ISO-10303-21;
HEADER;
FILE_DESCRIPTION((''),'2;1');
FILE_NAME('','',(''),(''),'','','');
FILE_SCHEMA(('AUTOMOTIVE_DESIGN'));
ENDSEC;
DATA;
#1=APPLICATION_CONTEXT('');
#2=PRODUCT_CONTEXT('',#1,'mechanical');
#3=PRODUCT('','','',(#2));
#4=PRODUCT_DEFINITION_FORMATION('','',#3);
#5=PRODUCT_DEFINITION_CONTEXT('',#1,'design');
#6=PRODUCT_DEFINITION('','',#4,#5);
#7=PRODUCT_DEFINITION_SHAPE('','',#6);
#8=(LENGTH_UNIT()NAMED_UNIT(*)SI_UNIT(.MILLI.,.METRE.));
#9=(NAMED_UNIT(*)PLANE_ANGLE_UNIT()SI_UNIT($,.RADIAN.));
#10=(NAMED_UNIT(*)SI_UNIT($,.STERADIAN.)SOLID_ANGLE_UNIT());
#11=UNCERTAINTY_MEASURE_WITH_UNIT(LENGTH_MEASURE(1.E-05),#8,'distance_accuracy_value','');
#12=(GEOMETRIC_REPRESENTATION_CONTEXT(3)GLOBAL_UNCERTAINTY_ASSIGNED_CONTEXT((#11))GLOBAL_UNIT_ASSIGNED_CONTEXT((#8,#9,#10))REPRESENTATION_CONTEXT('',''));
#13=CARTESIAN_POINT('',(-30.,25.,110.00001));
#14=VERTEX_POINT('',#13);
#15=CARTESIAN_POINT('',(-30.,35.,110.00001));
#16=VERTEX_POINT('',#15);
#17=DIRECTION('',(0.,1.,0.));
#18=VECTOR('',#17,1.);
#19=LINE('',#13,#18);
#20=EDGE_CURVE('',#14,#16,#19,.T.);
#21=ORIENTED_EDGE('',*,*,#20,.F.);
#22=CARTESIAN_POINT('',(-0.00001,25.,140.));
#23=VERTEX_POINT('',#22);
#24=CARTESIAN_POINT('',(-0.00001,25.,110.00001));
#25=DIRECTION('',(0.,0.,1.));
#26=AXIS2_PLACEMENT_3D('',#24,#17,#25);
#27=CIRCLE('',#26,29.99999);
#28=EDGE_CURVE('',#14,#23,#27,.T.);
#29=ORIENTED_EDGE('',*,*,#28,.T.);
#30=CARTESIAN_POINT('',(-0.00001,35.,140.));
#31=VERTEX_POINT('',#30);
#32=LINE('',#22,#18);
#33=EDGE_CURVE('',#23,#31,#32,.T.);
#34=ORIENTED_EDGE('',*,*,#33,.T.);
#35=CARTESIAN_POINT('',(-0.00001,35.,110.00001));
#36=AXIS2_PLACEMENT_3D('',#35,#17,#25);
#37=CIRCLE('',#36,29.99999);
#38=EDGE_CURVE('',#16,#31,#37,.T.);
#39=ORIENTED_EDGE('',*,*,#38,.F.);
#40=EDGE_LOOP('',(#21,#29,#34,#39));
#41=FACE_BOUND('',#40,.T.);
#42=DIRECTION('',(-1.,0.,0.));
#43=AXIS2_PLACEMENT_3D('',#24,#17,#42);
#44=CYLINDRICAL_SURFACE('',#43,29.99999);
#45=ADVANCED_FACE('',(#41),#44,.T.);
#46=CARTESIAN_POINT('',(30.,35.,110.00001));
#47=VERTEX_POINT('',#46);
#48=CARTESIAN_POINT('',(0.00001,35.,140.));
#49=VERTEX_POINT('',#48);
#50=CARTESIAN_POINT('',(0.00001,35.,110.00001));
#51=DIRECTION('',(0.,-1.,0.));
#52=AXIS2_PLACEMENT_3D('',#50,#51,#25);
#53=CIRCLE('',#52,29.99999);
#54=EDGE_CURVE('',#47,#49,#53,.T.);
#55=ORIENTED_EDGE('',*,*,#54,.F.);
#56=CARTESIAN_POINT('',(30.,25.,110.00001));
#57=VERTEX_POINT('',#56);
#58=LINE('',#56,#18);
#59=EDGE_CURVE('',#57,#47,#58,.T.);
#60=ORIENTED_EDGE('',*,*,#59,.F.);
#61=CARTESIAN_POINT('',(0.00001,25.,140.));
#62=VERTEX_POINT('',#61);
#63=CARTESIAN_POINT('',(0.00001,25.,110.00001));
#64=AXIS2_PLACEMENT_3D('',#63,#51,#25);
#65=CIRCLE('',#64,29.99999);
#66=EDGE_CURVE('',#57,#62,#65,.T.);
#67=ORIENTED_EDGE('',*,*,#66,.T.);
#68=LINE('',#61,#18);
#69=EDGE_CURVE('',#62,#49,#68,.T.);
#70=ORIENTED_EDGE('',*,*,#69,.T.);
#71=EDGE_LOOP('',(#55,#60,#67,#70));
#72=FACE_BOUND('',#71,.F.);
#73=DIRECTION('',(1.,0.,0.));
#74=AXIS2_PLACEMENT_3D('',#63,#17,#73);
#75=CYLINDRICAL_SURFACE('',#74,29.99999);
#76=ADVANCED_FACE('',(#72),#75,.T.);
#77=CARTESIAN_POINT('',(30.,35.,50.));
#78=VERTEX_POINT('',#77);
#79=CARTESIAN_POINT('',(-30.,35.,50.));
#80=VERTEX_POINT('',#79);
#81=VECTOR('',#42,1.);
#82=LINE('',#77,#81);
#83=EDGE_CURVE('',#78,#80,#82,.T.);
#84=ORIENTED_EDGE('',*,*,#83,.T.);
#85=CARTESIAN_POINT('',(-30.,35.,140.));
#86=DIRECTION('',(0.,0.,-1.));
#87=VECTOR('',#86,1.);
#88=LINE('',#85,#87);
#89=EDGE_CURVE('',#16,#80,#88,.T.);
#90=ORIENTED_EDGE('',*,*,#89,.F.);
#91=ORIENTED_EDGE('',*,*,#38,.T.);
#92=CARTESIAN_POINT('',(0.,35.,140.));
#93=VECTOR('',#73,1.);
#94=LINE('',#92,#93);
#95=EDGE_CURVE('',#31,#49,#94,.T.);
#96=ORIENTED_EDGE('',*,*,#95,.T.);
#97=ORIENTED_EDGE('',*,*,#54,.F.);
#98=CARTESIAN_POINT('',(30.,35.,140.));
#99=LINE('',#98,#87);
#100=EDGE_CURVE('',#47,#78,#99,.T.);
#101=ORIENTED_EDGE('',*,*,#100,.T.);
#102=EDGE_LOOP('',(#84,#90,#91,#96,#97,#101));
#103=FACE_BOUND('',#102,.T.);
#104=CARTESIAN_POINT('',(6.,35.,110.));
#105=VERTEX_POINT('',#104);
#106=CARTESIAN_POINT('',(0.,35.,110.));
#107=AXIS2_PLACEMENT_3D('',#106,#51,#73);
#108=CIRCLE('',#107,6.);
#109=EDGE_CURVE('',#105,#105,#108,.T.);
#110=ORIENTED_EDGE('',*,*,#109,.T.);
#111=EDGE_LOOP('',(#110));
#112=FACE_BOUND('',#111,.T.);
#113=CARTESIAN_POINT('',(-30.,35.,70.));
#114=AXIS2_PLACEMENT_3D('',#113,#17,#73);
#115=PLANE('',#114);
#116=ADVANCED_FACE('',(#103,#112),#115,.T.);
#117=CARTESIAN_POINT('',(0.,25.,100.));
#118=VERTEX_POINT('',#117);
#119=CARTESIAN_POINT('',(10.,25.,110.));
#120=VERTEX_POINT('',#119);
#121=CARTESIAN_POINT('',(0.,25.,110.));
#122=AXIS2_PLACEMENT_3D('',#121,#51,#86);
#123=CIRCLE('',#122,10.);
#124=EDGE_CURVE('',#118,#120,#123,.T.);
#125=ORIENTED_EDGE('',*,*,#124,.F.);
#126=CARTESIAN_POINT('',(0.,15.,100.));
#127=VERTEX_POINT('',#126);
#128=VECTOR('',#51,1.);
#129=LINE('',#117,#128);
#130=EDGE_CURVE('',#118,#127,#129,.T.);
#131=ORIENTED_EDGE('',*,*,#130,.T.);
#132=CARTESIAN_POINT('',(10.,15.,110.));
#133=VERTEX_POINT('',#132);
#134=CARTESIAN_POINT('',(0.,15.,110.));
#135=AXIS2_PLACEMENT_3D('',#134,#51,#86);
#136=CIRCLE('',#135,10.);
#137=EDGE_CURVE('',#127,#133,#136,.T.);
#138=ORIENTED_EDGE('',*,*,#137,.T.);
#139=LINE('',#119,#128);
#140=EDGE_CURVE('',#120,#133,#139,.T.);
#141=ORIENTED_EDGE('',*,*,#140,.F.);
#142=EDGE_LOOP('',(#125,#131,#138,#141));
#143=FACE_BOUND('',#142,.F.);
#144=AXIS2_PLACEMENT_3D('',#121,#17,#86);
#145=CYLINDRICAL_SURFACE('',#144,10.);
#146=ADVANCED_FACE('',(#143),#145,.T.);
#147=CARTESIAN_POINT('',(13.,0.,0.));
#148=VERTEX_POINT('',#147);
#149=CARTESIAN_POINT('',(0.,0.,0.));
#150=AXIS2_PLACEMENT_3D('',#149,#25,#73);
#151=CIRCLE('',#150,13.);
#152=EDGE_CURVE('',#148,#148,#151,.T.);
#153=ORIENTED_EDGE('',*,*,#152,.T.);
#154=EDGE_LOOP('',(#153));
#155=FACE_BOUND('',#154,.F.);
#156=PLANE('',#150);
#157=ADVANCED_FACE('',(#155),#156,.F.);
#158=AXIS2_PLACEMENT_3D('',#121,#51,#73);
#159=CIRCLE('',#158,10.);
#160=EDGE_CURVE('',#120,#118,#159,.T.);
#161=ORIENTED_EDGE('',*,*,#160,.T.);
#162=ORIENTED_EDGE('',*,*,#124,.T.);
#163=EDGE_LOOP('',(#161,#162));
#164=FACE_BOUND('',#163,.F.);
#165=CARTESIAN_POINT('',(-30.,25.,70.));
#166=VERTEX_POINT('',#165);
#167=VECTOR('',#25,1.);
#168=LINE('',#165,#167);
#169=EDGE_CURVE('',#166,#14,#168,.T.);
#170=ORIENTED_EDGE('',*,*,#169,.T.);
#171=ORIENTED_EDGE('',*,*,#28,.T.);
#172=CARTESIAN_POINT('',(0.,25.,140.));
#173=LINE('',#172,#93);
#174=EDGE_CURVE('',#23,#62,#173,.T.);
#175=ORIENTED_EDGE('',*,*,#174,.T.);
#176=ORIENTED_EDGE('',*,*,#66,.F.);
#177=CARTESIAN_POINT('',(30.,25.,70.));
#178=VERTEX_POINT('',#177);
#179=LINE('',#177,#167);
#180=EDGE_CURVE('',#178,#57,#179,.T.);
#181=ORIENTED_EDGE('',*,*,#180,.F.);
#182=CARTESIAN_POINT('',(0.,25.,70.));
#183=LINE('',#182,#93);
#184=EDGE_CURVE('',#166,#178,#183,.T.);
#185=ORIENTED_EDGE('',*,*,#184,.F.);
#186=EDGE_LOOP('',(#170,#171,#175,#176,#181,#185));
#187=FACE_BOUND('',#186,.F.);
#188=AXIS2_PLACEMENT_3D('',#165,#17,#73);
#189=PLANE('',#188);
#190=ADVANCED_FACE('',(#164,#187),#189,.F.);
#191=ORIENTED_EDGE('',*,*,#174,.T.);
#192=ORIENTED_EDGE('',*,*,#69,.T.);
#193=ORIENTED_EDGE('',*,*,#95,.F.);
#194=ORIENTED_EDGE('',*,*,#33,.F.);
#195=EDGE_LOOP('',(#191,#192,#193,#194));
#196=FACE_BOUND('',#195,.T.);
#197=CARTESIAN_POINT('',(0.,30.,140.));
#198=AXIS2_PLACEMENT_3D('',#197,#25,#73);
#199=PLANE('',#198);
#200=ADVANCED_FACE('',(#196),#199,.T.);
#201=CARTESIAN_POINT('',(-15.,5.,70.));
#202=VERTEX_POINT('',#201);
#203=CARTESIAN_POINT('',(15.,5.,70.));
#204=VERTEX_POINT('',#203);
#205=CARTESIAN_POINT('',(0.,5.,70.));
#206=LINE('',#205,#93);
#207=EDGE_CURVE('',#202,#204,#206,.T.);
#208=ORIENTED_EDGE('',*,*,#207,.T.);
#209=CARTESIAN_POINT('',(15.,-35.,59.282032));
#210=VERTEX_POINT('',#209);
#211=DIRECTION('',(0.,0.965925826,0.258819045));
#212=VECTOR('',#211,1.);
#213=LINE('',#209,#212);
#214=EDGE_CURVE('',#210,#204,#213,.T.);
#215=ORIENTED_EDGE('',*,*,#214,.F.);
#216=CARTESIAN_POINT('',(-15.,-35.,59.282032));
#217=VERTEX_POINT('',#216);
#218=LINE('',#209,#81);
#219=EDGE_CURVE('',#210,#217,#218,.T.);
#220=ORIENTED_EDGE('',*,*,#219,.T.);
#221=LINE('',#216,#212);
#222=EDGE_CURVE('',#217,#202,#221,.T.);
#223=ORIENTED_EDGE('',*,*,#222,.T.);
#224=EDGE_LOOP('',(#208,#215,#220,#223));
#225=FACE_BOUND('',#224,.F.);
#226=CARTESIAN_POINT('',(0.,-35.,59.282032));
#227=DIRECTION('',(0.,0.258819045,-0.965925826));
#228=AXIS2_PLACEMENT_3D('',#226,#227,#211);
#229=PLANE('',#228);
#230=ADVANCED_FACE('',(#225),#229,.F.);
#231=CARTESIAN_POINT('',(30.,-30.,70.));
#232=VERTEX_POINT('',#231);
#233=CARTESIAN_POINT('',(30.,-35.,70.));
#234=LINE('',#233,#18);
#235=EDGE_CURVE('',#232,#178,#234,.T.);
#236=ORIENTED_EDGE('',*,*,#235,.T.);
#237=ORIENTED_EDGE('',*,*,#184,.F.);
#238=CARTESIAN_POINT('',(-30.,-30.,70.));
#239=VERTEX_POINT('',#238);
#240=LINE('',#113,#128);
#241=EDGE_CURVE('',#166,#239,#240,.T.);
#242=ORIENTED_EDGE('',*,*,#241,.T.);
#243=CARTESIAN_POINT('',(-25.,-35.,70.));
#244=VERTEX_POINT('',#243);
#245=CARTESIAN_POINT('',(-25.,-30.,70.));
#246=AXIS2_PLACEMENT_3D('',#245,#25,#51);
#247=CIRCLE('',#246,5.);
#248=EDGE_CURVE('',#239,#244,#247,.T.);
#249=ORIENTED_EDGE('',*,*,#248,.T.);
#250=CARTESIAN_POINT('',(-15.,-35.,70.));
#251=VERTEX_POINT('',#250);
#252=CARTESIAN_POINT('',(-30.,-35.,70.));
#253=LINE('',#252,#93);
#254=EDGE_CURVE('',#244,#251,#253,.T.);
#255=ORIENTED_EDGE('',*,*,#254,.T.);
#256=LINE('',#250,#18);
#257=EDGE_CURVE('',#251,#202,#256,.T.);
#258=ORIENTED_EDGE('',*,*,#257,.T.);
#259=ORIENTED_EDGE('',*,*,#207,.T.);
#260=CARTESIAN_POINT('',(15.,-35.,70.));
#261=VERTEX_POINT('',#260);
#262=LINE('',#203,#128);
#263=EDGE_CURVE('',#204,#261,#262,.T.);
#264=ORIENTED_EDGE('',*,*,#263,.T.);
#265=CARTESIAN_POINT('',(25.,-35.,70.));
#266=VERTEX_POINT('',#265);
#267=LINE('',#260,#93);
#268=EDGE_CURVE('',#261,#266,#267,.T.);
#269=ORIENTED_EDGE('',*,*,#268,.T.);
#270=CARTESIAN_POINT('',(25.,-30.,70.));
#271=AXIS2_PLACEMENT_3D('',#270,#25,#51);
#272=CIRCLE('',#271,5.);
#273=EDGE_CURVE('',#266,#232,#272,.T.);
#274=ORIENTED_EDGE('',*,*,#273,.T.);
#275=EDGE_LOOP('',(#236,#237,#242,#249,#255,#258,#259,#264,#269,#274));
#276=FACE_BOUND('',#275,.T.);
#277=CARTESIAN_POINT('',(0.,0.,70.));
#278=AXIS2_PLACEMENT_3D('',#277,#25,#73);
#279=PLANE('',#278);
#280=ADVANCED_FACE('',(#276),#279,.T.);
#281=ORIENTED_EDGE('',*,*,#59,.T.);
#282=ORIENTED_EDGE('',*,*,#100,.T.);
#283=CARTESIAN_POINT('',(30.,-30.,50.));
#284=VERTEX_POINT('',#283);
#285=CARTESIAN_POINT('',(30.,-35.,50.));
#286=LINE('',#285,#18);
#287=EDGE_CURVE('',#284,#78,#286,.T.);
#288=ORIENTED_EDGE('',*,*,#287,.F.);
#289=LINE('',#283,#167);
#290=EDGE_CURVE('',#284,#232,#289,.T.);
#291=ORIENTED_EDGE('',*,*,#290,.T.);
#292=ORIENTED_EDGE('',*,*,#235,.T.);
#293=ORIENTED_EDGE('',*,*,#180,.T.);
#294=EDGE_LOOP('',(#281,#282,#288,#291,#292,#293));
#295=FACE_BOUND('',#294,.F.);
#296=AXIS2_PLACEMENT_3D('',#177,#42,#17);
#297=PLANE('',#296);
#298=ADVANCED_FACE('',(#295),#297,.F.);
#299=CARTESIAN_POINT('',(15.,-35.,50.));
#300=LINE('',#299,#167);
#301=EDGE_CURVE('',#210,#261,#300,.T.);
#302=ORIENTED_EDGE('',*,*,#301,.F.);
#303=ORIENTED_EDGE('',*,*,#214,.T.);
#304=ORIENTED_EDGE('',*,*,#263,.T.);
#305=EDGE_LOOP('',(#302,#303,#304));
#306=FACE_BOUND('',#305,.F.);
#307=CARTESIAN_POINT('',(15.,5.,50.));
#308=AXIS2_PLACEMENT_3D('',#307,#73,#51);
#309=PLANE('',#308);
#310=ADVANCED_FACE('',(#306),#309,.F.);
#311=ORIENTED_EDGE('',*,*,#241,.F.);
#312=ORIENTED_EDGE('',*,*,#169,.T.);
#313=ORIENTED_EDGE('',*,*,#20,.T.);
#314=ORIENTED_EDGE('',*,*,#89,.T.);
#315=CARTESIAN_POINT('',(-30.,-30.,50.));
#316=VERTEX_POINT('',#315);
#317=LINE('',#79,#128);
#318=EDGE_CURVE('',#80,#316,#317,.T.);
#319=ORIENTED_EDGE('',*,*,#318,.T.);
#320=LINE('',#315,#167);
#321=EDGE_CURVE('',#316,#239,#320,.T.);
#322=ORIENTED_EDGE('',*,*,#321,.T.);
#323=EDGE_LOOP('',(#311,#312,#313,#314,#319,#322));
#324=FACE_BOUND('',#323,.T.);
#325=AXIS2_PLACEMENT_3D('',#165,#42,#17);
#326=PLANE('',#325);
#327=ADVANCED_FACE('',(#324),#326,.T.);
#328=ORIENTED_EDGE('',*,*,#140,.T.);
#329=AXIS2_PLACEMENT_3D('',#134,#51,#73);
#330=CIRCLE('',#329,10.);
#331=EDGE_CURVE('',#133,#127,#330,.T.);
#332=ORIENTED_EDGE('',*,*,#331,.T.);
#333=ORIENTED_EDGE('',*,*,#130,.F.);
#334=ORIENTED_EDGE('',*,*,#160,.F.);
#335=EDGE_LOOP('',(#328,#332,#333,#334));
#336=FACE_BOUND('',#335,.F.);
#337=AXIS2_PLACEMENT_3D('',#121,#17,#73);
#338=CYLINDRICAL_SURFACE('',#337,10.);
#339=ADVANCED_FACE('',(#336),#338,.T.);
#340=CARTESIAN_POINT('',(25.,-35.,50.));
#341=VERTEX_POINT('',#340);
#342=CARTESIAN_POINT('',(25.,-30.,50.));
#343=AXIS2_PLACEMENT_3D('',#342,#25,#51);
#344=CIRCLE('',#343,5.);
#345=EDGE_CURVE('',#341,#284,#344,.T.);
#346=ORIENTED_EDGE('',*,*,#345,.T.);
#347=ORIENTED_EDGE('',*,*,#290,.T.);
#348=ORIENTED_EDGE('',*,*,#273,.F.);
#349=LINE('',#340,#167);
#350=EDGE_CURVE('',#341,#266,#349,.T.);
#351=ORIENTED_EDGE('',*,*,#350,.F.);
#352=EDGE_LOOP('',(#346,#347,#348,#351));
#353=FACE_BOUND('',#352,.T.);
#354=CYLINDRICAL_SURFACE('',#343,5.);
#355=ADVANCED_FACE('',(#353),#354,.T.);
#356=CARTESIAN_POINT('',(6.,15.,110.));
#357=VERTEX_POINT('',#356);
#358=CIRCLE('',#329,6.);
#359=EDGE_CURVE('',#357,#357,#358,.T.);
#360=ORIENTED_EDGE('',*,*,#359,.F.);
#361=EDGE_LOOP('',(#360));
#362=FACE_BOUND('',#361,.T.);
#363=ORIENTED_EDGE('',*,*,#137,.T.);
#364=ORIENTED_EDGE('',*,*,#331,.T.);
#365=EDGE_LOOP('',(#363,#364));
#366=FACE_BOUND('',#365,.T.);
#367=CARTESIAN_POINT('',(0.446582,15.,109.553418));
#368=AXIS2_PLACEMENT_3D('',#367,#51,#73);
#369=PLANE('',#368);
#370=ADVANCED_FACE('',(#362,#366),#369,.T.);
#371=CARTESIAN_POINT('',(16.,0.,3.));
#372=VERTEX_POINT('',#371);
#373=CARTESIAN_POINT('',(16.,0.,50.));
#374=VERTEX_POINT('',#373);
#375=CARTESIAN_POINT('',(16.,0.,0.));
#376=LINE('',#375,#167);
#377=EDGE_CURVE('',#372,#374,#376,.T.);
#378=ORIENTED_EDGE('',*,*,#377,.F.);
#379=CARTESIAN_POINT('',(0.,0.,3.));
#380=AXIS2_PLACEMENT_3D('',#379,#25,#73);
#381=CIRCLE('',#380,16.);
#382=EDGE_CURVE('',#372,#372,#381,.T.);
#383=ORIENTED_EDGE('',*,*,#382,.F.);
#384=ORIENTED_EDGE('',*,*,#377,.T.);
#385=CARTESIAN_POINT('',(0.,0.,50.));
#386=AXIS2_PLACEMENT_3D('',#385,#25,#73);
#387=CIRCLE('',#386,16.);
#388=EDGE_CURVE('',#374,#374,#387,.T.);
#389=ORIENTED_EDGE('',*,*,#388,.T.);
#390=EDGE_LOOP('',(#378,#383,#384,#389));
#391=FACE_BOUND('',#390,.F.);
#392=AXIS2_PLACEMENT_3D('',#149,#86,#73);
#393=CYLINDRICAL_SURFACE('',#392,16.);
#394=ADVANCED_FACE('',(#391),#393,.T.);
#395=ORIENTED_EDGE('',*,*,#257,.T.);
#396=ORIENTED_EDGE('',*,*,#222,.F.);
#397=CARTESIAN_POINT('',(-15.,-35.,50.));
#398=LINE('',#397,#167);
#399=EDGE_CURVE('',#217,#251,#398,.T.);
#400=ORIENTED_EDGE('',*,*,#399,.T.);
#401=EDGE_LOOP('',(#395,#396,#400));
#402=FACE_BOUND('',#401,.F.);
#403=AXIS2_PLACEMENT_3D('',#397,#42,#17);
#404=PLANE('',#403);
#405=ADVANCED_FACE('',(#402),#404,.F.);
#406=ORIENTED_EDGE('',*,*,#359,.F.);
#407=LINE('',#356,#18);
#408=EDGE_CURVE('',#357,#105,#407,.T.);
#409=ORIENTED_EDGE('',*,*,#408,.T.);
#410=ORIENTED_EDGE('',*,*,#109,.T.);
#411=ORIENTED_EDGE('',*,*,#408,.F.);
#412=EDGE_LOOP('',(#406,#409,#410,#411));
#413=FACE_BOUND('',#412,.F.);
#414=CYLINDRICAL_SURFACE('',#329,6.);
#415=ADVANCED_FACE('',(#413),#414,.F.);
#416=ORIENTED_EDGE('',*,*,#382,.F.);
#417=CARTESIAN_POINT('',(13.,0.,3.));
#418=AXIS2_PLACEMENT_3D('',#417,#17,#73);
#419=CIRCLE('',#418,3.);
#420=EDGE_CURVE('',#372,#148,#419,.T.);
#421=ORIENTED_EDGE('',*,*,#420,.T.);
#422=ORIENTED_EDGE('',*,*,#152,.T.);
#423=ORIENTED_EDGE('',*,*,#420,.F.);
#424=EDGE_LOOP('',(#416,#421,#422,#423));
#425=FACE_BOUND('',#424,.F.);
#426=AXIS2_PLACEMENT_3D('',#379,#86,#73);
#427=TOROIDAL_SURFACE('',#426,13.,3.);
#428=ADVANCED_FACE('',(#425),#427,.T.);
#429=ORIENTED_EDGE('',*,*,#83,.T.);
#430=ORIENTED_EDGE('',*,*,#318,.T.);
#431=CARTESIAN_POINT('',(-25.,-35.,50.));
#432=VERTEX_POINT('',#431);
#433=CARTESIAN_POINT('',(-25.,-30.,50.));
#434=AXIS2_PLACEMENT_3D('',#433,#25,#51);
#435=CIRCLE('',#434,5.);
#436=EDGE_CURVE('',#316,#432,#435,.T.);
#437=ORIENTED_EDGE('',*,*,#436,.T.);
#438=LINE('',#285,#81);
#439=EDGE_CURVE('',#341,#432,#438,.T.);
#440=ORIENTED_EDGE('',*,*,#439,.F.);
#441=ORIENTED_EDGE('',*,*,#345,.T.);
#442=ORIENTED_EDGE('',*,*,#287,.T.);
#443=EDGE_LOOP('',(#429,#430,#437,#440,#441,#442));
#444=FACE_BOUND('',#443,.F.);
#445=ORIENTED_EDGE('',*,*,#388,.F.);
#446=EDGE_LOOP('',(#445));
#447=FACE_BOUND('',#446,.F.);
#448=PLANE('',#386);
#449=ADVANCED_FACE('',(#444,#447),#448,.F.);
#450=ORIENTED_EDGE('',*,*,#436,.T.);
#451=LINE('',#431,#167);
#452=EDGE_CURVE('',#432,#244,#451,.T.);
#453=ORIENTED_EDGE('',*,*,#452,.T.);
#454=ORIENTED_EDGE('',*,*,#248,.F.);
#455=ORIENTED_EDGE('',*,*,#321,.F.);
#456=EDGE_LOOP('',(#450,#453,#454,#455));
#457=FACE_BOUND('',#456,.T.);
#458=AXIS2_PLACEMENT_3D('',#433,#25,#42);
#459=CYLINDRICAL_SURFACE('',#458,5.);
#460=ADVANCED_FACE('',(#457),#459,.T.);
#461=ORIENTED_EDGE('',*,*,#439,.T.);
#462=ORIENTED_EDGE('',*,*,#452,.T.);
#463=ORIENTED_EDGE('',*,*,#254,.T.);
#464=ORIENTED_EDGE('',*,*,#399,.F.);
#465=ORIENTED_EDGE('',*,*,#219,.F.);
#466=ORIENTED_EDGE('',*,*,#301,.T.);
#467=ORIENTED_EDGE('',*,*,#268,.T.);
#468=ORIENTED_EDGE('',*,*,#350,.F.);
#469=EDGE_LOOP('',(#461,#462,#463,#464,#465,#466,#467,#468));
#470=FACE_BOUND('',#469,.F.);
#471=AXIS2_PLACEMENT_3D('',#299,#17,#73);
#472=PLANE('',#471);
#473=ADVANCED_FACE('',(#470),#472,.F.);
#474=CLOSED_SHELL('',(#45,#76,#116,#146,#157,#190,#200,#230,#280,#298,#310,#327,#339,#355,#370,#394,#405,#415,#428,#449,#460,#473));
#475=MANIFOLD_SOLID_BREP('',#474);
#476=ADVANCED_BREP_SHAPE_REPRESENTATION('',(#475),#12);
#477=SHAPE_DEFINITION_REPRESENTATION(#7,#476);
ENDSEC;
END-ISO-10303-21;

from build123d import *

# Parameters (mm, degrees)
F0_R      = 16
F1_DEPTH  = 50
F4_R      = 3
F5_W      = 30
F5_H      = 40
F6_DEPTH  = 20
F8_DEPTH  = 15
F9_DEPTH  = 20
F11_W     = 60
F11_H     = 10
F12_DEPTH = 70
F13_R     = 29.99999
F16_DEPTH = 10
F18_R     = 6
F19_DEPTH = 50
F20_R     = 5


# Not quite as in the source:
# - a fillet or chamfer is up to 0.001 mm smaller than in the source, because OpenCascade refuses the exact size


with BuildPart() as f1:
    # F0 (on Top) → F1 (new body)
    with BuildSketch(Plane.XY):
        Circle(F0_R)
    extrude(amount=F1_DEPTH)

    # F4
    f4_edges = [f1.edges().sort_by_distance(p)[0] for p in [
        (-16, 0, 0),
    ]]
    fillet(f4_edges, radius=F4_R)

    # F5 (on offset) → F6 (join)
    with BuildSketch(Plane.XY.offset(50)):
        with Locations((0, -15)):
            Rectangle(F5_W, F5_H)
    extrude(amount=F6_DEPTH)

    # F7 (on Right) → F8 (cut, symmetric)
    with BuildSketch(Plane.YZ):
        Polygon((5, 70), (0, 70), (-35, 70), (-35, 59.2820323028), align=None)
    extrude(amount=F8_DEPTH, both=True, mode=Mode.SUBTRACT)

    # F3 (on offset) → F9 (join)
    with BuildSketch(Plane.XY.offset(50)):
        Polygon((30, 35), (-30, 35), (-30, -35), (-15, -35), (-15, 5), (15, 5), (15, -35), (30, -35), align=None)
    extrude(amount=F9_DEPTH)

    # F11 (on offset) → F12 (join)
    with BuildSketch(Plane.XY.offset(70)):
        with Locations((0, 30)):
            Rectangle(F11_W, F11_H)
    extrude(amount=F12_DEPTH)

    # F13 (radius 30 in the source; OpenCascade refuses exactly that, so slightly less here)
    f13_edges = [f1.edges().sort_by_distance(p)[0] for p in [
        (-30, 30, 140),
        (30, 30, 140),
    ]]
    fillet(f13_edges, radius=F13_R)

    # F15 (on offset) → F16 (join)
    with BuildSketch(Plane.XZ.offset(-25)):
        with BuildLine():
            ThreePointArc((0, 100), (7.0710678119, 102.9289321881), (10, 110))
            ThreePointArc((10, 110), (-7.0710678119, 117.0710678119), (0, 100))
        make_face()
    extrude(amount=F16_DEPTH)

    # F18 (on offset) → F19 (cut)
    with BuildSketch(Plane.XZ.offset(-15)):
        with Locations((0, 110)):
            Circle(F18_R)
    extrude(amount=-F19_DEPTH, mode=Mode.SUBTRACT)

    # F20
    f20_edges = [f1.edges().sort_by_distance(p)[0] for p in [
        (-30, -35, 60),
        (30, -35, 60),
    ]]
    fillet(f20_edges, radius=F20_R)


solid = f1.part
